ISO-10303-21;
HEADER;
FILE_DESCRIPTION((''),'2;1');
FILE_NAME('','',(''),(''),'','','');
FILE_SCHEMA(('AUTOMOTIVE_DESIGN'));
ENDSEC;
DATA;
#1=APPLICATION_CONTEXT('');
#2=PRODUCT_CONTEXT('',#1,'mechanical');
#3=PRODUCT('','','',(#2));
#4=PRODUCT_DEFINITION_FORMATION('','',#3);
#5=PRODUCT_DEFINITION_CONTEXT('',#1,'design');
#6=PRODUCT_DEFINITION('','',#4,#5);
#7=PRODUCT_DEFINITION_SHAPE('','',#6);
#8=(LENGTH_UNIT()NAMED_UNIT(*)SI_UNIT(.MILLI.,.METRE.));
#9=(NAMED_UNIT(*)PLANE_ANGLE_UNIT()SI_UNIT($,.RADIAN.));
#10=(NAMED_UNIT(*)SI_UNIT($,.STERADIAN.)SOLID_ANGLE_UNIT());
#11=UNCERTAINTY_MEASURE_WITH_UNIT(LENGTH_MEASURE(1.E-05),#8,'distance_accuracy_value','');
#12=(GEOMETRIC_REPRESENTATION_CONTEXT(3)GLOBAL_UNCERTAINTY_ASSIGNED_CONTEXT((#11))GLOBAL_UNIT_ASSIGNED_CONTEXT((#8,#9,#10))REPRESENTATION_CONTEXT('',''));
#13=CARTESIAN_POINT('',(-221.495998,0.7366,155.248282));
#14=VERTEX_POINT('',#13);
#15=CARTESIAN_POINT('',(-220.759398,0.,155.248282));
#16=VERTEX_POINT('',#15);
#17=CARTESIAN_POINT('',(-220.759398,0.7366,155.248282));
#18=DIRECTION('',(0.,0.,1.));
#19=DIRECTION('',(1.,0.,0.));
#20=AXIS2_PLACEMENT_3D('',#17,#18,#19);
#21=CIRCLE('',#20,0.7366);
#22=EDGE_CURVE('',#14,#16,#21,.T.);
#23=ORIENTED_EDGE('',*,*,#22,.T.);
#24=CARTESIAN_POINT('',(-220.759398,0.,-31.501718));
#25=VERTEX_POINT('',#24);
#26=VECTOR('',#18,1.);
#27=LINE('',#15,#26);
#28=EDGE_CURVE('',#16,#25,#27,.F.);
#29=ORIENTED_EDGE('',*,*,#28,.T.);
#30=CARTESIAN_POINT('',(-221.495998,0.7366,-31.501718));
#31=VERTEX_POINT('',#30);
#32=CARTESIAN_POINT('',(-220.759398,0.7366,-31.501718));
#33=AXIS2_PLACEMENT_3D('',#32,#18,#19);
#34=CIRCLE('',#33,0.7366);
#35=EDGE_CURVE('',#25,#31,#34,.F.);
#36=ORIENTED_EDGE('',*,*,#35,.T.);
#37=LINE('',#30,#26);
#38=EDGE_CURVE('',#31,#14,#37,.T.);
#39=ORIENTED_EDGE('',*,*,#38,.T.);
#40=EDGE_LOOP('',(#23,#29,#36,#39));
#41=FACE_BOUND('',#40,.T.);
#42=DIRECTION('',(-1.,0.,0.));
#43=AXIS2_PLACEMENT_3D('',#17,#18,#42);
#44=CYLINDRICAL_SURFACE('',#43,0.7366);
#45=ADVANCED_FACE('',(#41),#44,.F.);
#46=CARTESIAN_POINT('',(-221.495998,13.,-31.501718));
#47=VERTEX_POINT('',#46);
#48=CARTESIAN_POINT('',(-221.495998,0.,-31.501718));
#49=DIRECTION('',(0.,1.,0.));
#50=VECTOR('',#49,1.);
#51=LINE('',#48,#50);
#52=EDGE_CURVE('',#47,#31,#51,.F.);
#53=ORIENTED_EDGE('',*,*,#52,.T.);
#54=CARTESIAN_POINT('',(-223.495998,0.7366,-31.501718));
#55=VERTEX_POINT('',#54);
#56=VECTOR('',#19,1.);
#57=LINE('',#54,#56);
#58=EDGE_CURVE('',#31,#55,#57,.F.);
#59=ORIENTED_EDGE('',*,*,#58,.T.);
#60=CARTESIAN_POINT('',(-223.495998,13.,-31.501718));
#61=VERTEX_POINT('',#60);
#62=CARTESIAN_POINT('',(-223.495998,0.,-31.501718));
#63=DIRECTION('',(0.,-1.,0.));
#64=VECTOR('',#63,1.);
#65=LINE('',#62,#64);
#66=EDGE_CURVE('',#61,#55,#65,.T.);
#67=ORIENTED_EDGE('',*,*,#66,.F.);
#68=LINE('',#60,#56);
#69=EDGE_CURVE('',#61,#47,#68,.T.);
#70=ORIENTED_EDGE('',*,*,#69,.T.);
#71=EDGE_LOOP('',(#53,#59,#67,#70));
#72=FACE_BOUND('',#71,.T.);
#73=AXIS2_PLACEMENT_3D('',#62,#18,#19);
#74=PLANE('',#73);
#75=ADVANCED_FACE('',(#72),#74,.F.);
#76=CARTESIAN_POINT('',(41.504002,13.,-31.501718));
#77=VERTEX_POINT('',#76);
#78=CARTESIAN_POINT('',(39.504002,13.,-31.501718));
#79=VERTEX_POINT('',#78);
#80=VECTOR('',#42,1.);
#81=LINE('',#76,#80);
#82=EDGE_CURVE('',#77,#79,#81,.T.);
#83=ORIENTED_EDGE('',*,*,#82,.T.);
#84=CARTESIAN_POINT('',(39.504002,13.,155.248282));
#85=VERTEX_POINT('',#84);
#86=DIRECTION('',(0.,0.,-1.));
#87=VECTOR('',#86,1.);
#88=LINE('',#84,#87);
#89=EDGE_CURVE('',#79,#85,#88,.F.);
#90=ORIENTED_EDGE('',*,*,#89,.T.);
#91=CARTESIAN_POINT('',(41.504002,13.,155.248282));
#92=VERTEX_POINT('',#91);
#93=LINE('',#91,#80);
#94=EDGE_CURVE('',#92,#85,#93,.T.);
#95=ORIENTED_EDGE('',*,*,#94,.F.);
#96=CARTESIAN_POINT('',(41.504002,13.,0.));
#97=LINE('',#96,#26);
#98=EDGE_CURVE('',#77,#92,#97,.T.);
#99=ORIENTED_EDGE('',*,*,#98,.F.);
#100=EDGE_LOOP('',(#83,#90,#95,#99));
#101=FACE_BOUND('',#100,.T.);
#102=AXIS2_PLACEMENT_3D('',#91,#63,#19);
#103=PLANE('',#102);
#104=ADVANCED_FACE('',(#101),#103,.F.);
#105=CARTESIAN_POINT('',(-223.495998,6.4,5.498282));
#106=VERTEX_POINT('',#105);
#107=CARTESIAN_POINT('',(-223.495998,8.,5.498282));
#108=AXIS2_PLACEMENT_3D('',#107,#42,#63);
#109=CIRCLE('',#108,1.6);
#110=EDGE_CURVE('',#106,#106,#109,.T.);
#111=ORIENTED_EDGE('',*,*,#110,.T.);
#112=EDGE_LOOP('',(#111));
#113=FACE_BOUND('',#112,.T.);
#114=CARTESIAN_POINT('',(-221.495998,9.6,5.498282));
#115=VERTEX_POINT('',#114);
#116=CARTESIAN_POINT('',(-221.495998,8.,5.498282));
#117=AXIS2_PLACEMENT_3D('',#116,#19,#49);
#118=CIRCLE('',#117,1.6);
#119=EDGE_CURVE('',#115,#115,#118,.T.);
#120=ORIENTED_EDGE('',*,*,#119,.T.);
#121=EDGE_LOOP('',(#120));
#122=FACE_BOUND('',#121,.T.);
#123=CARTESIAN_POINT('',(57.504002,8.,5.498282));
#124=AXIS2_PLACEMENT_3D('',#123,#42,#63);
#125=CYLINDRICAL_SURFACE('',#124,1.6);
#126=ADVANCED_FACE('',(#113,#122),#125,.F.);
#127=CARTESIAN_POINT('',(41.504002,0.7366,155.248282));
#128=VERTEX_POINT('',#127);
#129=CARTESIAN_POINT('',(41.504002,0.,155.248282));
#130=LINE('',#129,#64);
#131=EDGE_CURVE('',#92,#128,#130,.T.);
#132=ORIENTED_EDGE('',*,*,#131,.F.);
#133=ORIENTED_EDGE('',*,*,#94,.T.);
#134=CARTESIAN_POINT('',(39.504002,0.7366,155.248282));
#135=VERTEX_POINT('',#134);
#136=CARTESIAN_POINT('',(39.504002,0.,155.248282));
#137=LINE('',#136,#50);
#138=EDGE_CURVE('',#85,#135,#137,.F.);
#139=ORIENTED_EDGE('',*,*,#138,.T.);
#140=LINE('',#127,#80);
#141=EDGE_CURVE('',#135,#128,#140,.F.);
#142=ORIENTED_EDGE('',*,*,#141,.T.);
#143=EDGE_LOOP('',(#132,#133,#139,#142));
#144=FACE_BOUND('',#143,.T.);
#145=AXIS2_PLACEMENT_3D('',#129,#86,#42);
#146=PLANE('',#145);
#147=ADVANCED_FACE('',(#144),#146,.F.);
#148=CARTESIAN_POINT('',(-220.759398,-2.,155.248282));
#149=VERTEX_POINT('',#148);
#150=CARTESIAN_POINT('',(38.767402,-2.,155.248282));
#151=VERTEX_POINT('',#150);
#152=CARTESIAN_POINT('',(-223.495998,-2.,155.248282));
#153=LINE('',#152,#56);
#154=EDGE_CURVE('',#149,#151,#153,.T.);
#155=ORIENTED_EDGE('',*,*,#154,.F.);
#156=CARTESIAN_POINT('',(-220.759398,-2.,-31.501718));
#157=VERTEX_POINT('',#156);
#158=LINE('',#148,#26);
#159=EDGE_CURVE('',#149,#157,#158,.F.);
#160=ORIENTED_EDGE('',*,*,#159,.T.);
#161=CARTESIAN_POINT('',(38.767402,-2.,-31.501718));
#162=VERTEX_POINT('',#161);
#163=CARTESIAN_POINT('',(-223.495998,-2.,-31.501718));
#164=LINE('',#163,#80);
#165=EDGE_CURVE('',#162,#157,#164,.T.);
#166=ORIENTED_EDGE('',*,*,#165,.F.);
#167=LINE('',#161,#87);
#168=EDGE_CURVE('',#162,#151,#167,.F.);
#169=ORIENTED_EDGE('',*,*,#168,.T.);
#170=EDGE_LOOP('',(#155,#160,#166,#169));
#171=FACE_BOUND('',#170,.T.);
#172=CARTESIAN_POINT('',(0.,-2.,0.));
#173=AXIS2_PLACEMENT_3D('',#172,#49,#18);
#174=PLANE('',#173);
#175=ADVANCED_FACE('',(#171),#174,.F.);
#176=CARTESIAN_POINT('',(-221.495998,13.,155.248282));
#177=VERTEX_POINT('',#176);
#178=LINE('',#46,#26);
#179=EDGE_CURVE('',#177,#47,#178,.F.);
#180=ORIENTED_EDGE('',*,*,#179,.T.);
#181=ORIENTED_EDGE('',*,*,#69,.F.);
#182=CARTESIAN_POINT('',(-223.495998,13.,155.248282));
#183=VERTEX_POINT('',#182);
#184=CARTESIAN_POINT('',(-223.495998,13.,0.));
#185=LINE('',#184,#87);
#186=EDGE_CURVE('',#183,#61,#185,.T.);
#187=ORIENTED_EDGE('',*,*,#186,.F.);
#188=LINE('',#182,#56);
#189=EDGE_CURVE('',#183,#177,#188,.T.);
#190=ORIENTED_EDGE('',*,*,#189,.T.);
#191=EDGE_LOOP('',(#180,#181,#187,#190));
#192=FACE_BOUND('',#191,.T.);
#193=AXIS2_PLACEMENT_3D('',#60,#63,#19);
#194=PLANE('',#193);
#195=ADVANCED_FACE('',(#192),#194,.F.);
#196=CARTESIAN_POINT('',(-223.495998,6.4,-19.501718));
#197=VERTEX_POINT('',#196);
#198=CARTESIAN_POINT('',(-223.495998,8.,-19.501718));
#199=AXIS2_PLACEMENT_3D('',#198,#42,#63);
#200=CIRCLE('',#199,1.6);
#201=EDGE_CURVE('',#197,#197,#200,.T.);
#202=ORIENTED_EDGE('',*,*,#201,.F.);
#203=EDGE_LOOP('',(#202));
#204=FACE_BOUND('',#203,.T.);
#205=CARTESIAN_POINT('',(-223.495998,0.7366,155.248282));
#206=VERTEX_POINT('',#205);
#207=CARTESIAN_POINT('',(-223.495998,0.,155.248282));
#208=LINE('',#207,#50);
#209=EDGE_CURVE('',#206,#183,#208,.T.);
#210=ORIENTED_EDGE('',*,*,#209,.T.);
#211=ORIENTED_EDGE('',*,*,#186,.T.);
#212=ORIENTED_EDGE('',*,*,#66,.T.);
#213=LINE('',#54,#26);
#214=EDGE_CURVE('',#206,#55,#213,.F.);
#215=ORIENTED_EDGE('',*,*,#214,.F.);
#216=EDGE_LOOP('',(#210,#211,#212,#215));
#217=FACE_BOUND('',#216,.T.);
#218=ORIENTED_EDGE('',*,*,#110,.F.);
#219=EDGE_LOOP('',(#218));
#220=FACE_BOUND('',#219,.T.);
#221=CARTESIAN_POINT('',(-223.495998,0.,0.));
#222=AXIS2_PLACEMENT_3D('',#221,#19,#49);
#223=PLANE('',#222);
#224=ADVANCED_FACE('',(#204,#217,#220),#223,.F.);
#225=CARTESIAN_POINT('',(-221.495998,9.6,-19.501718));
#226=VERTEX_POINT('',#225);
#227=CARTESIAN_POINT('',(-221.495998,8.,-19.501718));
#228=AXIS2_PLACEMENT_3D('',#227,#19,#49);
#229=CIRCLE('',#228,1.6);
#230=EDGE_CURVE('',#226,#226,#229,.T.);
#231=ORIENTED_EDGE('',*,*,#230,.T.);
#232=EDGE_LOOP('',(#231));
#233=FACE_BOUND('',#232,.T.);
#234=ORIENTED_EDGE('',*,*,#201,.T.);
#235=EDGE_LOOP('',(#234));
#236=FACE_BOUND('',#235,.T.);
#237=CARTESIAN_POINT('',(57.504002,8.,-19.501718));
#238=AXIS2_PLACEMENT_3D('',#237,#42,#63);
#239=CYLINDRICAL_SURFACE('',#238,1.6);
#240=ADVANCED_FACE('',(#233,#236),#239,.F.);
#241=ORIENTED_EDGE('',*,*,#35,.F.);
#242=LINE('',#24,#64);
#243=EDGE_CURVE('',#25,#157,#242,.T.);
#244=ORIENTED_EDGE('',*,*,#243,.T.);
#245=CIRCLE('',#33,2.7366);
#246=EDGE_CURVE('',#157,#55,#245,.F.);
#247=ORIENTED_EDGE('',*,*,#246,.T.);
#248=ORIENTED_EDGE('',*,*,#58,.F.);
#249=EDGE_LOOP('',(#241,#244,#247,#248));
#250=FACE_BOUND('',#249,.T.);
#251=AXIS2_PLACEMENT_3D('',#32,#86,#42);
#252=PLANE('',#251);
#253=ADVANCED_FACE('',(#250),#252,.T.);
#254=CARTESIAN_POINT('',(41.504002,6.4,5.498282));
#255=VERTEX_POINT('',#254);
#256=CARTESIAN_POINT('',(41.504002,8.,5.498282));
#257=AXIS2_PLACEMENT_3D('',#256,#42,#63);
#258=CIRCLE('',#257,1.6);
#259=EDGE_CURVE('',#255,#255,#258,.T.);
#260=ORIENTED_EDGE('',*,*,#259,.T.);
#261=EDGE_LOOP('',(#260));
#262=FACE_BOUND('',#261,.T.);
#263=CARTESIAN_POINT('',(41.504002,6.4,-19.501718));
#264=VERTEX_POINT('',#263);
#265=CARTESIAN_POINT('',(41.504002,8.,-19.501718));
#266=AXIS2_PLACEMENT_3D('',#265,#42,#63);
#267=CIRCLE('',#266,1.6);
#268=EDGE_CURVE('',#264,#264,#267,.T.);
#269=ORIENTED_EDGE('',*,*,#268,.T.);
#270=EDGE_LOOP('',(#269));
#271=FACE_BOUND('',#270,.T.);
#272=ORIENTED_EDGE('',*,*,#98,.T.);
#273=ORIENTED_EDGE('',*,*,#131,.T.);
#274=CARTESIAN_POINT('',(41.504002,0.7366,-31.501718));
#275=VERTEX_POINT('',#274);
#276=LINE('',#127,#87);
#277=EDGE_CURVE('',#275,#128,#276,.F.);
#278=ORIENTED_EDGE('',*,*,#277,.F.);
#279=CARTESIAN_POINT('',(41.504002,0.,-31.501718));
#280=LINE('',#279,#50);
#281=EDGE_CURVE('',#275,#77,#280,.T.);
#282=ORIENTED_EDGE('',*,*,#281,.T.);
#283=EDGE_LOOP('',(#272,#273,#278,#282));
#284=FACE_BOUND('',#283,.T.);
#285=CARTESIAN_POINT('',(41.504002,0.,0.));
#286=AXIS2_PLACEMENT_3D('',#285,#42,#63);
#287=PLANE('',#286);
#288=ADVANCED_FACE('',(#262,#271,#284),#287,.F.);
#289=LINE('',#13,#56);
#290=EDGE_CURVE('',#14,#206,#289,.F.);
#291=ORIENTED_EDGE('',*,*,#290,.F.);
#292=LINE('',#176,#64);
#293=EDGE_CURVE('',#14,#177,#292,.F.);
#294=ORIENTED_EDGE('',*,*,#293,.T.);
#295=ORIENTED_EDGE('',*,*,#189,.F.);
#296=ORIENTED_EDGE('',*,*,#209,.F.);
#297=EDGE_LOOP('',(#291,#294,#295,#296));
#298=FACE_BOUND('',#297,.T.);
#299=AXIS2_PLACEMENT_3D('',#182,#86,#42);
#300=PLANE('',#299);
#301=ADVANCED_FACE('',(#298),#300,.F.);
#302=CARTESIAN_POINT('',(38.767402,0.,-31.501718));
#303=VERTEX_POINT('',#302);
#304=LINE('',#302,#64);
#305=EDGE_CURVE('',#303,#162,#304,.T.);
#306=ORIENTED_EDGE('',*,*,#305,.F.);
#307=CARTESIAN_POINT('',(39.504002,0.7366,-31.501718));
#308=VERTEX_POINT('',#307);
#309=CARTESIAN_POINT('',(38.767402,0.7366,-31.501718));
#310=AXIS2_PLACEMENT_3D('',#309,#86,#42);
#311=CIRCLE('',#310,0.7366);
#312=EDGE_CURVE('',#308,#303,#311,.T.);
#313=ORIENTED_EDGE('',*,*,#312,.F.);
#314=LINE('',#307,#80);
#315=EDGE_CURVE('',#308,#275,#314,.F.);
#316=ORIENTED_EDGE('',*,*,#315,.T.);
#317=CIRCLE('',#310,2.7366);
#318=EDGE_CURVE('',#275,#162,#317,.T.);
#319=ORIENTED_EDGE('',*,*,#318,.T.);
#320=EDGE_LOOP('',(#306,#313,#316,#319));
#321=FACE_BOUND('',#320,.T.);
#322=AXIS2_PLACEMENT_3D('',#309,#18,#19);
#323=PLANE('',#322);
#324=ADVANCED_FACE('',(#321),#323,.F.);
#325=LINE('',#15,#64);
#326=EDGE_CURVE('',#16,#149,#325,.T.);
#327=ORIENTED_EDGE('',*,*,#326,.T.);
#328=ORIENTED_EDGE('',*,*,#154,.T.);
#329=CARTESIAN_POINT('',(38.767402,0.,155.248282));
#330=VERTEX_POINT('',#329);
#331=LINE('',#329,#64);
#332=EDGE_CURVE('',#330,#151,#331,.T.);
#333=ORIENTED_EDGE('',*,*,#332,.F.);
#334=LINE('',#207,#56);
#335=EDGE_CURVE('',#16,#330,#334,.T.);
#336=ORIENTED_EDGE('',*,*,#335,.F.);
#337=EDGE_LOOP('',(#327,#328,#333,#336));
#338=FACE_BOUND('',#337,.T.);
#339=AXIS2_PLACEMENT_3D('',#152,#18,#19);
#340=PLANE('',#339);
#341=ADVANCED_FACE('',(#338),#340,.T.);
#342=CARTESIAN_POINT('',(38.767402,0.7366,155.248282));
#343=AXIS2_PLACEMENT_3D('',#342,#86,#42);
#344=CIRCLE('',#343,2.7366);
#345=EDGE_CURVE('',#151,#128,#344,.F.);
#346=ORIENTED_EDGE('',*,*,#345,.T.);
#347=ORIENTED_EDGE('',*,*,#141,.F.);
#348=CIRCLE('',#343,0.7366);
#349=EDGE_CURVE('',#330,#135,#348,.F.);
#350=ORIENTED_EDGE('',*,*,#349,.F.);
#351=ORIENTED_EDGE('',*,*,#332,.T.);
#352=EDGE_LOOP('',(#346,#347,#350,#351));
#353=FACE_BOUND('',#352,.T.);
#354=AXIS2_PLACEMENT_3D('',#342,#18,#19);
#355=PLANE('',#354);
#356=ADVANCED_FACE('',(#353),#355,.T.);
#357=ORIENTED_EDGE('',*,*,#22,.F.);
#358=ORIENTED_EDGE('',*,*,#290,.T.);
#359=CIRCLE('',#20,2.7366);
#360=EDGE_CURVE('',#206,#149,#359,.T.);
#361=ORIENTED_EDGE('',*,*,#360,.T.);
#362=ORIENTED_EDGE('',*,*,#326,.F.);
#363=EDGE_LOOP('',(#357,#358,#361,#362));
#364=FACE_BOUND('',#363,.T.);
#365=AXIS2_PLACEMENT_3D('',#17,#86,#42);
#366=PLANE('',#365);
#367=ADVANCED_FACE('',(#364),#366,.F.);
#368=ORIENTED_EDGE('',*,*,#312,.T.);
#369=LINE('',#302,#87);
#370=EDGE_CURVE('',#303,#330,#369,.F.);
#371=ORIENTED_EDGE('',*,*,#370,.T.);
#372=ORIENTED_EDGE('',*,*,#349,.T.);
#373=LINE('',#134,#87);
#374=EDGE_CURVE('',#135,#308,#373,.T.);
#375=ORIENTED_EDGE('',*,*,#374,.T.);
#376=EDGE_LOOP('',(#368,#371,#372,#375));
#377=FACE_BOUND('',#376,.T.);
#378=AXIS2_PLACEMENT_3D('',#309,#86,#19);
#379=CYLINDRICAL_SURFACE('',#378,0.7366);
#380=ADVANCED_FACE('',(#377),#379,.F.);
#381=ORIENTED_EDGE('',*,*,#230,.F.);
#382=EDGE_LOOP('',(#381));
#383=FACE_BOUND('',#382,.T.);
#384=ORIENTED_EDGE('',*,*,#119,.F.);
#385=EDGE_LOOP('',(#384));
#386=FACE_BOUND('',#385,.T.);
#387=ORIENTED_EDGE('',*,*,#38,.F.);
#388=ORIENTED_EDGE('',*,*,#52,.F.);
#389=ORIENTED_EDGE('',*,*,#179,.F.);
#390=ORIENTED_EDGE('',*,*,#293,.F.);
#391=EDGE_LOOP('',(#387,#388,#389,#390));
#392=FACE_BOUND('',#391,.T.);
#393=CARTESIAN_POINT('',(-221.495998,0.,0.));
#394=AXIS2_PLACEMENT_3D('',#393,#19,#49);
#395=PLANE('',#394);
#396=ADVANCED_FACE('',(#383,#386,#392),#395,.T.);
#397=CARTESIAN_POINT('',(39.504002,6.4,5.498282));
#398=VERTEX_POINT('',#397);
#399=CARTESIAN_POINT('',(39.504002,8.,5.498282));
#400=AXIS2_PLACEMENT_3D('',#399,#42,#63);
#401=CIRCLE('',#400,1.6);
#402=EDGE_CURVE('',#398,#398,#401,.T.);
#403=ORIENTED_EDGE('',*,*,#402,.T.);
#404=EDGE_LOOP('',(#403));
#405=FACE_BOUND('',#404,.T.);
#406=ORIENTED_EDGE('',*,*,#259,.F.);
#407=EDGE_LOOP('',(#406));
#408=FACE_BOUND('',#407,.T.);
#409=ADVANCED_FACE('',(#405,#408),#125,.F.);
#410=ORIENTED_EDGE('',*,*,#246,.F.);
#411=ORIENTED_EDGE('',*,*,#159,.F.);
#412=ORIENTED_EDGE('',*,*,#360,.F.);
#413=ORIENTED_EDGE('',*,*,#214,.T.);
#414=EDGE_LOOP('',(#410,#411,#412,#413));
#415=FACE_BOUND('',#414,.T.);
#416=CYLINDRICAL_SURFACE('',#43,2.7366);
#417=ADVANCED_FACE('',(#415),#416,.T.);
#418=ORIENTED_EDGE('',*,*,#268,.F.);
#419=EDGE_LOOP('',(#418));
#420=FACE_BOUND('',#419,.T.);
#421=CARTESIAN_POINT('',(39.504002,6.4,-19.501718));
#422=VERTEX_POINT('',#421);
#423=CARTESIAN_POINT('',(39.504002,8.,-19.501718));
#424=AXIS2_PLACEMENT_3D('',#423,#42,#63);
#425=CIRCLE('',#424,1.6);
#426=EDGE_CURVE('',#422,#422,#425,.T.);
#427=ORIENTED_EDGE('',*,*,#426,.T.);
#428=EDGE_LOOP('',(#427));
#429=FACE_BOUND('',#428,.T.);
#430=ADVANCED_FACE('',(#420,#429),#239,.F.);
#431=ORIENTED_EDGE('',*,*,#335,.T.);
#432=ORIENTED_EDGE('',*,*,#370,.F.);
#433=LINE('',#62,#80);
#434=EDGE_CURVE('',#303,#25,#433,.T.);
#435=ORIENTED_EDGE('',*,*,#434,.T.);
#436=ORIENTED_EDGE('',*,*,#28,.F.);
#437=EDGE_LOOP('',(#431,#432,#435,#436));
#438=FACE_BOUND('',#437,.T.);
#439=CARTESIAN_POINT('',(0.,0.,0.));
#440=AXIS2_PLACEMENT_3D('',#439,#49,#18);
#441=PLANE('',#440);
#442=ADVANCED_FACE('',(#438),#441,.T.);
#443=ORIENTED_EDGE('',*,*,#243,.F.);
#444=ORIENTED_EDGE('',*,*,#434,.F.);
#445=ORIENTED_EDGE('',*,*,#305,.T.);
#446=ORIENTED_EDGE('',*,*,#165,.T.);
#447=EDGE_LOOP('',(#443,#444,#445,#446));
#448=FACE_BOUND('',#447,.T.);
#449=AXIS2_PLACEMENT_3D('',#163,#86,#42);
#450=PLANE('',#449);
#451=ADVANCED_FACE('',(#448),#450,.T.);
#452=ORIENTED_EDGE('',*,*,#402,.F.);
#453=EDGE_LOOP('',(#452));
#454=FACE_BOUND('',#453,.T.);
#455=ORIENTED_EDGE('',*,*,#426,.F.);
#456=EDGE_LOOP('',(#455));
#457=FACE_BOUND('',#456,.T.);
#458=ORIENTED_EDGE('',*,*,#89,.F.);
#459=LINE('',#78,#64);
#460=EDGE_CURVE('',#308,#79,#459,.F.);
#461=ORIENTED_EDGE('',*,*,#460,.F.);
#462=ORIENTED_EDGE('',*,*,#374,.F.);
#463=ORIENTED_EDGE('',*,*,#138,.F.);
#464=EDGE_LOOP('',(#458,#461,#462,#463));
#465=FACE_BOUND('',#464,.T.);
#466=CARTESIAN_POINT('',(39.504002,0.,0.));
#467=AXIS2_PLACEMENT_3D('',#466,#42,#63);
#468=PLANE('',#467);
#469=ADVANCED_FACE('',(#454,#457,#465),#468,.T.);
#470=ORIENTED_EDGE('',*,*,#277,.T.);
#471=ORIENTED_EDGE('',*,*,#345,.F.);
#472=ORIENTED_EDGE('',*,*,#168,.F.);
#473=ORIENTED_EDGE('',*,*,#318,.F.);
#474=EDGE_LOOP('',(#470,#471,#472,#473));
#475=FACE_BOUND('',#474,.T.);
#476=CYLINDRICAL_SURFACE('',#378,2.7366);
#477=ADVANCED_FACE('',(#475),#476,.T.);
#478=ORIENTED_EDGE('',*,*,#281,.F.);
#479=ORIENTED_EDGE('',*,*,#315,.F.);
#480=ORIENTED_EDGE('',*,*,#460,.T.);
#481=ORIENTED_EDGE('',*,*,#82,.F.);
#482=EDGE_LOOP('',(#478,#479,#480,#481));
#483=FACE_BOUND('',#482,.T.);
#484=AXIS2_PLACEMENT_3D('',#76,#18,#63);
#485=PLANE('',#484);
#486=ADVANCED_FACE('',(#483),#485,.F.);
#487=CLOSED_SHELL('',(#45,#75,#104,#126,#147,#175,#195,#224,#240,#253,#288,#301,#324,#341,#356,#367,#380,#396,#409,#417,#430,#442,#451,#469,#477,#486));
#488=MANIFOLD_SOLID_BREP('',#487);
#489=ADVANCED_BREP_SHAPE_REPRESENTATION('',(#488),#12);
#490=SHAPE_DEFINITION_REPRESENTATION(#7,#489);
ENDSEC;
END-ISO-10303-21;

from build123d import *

# Parameters (mm, degrees)
SKETCH_1_W                         = 265
SKETCH_1_H                         = 186.75
SM_BASE_FLANGE_1_DEPTH             = 2
SM_EDGE_FLANGE_1_STRIP_W           = 9.4732
SM_EDGE_FLANGE_1_STRIP_H           = 2
SM_EDGE_FLANGE_1_STRIP_CUT_DEPTH   = 186.75
SM_EDGE_FLANGE_1_STRIP_2_W         = 9.4732
SM_EDGE_FLANGE_1_STRIP_2_H         = 2
SM_EDGE_FLANGE_1_STRIP_CUT_2_DEPTH = 186.75
SM_EDGE_FLANGE_1_DEPTH             = 186.75
SM_EDGE_FLANGE_1_BEND_DEPTH        = 186.75
SKETCH_12_R                        = 1.6
CUT_EXTRUDE_1_DEPTH                = 281


# Sheet-metal steps are written as plain solids
with BuildPart() as part:
    # Sketch 1 → Базовая кромка1 (new body)
    with BuildSketch(Plane(origin=(0, 0, 0), x_dir=(1, 0, 0), z_dir=(0, 1, 0))):
        with Locations((-90.995998399, -61.873281816)):
            Rectangle(SKETCH_1_W, SKETCH_1_H)
    extrude(amount=-SM_BASE_FLANGE_1_DEPTH)

    # Ребро-кромка1 strip (across the edge) → Ребро-кромка1 strip cut (cut)
    with BuildSketch(Plane(origin=(-223.495998399, 0, -31.501718184), x_dir=(1, 0, 0), z_dir=(0, 0, 1))):
        with Locations((-2, -1)):
            Rectangle(SM_EDGE_FLANGE_1_STRIP_W, SM_EDGE_FLANGE_1_STRIP_H)
    extrude(amount=SM_EDGE_FLANGE_1_STRIP_CUT_DEPTH, mode=Mode.SUBTRACT)

    # Ребро-кромка1 strip 2 (across the edge) → Ребро-кромка1 strip cut 2 (cut)
    with BuildSketch(Plane(origin=(41.504001601, 0, 155.248281816), x_dir=(-1, 0, 0), z_dir=(0, 0, -1))):
        with Locations((-2, -1)):
            Rectangle(SM_EDGE_FLANGE_1_STRIP_2_W, SM_EDGE_FLANGE_1_STRIP_2_H)
    extrude(amount=SM_EDGE_FLANGE_1_STRIP_CUT_2_DEPTH, mode=Mode.SUBTRACT)

    # Ребро-кромка1 section (across the edge) → Ребро-кромка1 (add)
    with BuildSketch(Plane(origin=(-223.495998399, 0, -31.501718184), x_dir=(1, 0, 0), z_dir=(0, 0, 1))):
        with BuildLine():
            Line((0, 0.7366), (0, 13))
            Line((0, 13), (2, 13))
            Line((2, 13), (2, 0.7366))
            ThreePointArc((2, 0.7366), (2.215745145, 0.215745145), (2.7366, 0))
            Line((2.7366, 0), (2.7366, -2))
            ThreePointArc((2.7366, -2), (0.801531583, -1.198468417), (0, 0.7366))
        make_face()
    extrude(amount=SM_EDGE_FLANGE_1_DEPTH)

    # Ребро-кромка1 section 2 (across the edge) → Ребро-кромка1 bend (add)
    with BuildSketch(Plane(origin=(41.504001601, 0, 155.248281816), x_dir=(-1, 0, 0), z_dir=(0, 0, -1))):
        with BuildLine():
            Line((0, 0.7366), (0, 13))
            Line((0, 13), (2, 13))
            Line((2, 13), (2, 0.7366))
            ThreePointArc((2, 0.7366), (2.215745145, 0.215745145), (2.7366, 0))
            Line((2.7366, 0), (2.7366, -2))
            ThreePointArc((2.7366, -2), (0.801531583, -1.198468417), (0, 0.7366))
        make_face()
    extrude(amount=SM_EDGE_FLANGE_1_BEND_DEPTH)

    # Эскиз12 → Вырез-Вытянуть1 (cut)
    with BuildSketch(Plane.ZY.offset(223.495998399)):
        with Locations(Location((-19.501718184, 8, 0), (0, 0, 270))):
            Circle(SKETCH_12_R)
        with Locations(Location((5.498281816, 8, 0), (0, 0, 270))):
            Circle(SKETCH_12_R)
    extrude(amount=-CUT_EXTRUDE_1_DEPTH, mode=Mode.SUBTRACT)


solid = part.part
